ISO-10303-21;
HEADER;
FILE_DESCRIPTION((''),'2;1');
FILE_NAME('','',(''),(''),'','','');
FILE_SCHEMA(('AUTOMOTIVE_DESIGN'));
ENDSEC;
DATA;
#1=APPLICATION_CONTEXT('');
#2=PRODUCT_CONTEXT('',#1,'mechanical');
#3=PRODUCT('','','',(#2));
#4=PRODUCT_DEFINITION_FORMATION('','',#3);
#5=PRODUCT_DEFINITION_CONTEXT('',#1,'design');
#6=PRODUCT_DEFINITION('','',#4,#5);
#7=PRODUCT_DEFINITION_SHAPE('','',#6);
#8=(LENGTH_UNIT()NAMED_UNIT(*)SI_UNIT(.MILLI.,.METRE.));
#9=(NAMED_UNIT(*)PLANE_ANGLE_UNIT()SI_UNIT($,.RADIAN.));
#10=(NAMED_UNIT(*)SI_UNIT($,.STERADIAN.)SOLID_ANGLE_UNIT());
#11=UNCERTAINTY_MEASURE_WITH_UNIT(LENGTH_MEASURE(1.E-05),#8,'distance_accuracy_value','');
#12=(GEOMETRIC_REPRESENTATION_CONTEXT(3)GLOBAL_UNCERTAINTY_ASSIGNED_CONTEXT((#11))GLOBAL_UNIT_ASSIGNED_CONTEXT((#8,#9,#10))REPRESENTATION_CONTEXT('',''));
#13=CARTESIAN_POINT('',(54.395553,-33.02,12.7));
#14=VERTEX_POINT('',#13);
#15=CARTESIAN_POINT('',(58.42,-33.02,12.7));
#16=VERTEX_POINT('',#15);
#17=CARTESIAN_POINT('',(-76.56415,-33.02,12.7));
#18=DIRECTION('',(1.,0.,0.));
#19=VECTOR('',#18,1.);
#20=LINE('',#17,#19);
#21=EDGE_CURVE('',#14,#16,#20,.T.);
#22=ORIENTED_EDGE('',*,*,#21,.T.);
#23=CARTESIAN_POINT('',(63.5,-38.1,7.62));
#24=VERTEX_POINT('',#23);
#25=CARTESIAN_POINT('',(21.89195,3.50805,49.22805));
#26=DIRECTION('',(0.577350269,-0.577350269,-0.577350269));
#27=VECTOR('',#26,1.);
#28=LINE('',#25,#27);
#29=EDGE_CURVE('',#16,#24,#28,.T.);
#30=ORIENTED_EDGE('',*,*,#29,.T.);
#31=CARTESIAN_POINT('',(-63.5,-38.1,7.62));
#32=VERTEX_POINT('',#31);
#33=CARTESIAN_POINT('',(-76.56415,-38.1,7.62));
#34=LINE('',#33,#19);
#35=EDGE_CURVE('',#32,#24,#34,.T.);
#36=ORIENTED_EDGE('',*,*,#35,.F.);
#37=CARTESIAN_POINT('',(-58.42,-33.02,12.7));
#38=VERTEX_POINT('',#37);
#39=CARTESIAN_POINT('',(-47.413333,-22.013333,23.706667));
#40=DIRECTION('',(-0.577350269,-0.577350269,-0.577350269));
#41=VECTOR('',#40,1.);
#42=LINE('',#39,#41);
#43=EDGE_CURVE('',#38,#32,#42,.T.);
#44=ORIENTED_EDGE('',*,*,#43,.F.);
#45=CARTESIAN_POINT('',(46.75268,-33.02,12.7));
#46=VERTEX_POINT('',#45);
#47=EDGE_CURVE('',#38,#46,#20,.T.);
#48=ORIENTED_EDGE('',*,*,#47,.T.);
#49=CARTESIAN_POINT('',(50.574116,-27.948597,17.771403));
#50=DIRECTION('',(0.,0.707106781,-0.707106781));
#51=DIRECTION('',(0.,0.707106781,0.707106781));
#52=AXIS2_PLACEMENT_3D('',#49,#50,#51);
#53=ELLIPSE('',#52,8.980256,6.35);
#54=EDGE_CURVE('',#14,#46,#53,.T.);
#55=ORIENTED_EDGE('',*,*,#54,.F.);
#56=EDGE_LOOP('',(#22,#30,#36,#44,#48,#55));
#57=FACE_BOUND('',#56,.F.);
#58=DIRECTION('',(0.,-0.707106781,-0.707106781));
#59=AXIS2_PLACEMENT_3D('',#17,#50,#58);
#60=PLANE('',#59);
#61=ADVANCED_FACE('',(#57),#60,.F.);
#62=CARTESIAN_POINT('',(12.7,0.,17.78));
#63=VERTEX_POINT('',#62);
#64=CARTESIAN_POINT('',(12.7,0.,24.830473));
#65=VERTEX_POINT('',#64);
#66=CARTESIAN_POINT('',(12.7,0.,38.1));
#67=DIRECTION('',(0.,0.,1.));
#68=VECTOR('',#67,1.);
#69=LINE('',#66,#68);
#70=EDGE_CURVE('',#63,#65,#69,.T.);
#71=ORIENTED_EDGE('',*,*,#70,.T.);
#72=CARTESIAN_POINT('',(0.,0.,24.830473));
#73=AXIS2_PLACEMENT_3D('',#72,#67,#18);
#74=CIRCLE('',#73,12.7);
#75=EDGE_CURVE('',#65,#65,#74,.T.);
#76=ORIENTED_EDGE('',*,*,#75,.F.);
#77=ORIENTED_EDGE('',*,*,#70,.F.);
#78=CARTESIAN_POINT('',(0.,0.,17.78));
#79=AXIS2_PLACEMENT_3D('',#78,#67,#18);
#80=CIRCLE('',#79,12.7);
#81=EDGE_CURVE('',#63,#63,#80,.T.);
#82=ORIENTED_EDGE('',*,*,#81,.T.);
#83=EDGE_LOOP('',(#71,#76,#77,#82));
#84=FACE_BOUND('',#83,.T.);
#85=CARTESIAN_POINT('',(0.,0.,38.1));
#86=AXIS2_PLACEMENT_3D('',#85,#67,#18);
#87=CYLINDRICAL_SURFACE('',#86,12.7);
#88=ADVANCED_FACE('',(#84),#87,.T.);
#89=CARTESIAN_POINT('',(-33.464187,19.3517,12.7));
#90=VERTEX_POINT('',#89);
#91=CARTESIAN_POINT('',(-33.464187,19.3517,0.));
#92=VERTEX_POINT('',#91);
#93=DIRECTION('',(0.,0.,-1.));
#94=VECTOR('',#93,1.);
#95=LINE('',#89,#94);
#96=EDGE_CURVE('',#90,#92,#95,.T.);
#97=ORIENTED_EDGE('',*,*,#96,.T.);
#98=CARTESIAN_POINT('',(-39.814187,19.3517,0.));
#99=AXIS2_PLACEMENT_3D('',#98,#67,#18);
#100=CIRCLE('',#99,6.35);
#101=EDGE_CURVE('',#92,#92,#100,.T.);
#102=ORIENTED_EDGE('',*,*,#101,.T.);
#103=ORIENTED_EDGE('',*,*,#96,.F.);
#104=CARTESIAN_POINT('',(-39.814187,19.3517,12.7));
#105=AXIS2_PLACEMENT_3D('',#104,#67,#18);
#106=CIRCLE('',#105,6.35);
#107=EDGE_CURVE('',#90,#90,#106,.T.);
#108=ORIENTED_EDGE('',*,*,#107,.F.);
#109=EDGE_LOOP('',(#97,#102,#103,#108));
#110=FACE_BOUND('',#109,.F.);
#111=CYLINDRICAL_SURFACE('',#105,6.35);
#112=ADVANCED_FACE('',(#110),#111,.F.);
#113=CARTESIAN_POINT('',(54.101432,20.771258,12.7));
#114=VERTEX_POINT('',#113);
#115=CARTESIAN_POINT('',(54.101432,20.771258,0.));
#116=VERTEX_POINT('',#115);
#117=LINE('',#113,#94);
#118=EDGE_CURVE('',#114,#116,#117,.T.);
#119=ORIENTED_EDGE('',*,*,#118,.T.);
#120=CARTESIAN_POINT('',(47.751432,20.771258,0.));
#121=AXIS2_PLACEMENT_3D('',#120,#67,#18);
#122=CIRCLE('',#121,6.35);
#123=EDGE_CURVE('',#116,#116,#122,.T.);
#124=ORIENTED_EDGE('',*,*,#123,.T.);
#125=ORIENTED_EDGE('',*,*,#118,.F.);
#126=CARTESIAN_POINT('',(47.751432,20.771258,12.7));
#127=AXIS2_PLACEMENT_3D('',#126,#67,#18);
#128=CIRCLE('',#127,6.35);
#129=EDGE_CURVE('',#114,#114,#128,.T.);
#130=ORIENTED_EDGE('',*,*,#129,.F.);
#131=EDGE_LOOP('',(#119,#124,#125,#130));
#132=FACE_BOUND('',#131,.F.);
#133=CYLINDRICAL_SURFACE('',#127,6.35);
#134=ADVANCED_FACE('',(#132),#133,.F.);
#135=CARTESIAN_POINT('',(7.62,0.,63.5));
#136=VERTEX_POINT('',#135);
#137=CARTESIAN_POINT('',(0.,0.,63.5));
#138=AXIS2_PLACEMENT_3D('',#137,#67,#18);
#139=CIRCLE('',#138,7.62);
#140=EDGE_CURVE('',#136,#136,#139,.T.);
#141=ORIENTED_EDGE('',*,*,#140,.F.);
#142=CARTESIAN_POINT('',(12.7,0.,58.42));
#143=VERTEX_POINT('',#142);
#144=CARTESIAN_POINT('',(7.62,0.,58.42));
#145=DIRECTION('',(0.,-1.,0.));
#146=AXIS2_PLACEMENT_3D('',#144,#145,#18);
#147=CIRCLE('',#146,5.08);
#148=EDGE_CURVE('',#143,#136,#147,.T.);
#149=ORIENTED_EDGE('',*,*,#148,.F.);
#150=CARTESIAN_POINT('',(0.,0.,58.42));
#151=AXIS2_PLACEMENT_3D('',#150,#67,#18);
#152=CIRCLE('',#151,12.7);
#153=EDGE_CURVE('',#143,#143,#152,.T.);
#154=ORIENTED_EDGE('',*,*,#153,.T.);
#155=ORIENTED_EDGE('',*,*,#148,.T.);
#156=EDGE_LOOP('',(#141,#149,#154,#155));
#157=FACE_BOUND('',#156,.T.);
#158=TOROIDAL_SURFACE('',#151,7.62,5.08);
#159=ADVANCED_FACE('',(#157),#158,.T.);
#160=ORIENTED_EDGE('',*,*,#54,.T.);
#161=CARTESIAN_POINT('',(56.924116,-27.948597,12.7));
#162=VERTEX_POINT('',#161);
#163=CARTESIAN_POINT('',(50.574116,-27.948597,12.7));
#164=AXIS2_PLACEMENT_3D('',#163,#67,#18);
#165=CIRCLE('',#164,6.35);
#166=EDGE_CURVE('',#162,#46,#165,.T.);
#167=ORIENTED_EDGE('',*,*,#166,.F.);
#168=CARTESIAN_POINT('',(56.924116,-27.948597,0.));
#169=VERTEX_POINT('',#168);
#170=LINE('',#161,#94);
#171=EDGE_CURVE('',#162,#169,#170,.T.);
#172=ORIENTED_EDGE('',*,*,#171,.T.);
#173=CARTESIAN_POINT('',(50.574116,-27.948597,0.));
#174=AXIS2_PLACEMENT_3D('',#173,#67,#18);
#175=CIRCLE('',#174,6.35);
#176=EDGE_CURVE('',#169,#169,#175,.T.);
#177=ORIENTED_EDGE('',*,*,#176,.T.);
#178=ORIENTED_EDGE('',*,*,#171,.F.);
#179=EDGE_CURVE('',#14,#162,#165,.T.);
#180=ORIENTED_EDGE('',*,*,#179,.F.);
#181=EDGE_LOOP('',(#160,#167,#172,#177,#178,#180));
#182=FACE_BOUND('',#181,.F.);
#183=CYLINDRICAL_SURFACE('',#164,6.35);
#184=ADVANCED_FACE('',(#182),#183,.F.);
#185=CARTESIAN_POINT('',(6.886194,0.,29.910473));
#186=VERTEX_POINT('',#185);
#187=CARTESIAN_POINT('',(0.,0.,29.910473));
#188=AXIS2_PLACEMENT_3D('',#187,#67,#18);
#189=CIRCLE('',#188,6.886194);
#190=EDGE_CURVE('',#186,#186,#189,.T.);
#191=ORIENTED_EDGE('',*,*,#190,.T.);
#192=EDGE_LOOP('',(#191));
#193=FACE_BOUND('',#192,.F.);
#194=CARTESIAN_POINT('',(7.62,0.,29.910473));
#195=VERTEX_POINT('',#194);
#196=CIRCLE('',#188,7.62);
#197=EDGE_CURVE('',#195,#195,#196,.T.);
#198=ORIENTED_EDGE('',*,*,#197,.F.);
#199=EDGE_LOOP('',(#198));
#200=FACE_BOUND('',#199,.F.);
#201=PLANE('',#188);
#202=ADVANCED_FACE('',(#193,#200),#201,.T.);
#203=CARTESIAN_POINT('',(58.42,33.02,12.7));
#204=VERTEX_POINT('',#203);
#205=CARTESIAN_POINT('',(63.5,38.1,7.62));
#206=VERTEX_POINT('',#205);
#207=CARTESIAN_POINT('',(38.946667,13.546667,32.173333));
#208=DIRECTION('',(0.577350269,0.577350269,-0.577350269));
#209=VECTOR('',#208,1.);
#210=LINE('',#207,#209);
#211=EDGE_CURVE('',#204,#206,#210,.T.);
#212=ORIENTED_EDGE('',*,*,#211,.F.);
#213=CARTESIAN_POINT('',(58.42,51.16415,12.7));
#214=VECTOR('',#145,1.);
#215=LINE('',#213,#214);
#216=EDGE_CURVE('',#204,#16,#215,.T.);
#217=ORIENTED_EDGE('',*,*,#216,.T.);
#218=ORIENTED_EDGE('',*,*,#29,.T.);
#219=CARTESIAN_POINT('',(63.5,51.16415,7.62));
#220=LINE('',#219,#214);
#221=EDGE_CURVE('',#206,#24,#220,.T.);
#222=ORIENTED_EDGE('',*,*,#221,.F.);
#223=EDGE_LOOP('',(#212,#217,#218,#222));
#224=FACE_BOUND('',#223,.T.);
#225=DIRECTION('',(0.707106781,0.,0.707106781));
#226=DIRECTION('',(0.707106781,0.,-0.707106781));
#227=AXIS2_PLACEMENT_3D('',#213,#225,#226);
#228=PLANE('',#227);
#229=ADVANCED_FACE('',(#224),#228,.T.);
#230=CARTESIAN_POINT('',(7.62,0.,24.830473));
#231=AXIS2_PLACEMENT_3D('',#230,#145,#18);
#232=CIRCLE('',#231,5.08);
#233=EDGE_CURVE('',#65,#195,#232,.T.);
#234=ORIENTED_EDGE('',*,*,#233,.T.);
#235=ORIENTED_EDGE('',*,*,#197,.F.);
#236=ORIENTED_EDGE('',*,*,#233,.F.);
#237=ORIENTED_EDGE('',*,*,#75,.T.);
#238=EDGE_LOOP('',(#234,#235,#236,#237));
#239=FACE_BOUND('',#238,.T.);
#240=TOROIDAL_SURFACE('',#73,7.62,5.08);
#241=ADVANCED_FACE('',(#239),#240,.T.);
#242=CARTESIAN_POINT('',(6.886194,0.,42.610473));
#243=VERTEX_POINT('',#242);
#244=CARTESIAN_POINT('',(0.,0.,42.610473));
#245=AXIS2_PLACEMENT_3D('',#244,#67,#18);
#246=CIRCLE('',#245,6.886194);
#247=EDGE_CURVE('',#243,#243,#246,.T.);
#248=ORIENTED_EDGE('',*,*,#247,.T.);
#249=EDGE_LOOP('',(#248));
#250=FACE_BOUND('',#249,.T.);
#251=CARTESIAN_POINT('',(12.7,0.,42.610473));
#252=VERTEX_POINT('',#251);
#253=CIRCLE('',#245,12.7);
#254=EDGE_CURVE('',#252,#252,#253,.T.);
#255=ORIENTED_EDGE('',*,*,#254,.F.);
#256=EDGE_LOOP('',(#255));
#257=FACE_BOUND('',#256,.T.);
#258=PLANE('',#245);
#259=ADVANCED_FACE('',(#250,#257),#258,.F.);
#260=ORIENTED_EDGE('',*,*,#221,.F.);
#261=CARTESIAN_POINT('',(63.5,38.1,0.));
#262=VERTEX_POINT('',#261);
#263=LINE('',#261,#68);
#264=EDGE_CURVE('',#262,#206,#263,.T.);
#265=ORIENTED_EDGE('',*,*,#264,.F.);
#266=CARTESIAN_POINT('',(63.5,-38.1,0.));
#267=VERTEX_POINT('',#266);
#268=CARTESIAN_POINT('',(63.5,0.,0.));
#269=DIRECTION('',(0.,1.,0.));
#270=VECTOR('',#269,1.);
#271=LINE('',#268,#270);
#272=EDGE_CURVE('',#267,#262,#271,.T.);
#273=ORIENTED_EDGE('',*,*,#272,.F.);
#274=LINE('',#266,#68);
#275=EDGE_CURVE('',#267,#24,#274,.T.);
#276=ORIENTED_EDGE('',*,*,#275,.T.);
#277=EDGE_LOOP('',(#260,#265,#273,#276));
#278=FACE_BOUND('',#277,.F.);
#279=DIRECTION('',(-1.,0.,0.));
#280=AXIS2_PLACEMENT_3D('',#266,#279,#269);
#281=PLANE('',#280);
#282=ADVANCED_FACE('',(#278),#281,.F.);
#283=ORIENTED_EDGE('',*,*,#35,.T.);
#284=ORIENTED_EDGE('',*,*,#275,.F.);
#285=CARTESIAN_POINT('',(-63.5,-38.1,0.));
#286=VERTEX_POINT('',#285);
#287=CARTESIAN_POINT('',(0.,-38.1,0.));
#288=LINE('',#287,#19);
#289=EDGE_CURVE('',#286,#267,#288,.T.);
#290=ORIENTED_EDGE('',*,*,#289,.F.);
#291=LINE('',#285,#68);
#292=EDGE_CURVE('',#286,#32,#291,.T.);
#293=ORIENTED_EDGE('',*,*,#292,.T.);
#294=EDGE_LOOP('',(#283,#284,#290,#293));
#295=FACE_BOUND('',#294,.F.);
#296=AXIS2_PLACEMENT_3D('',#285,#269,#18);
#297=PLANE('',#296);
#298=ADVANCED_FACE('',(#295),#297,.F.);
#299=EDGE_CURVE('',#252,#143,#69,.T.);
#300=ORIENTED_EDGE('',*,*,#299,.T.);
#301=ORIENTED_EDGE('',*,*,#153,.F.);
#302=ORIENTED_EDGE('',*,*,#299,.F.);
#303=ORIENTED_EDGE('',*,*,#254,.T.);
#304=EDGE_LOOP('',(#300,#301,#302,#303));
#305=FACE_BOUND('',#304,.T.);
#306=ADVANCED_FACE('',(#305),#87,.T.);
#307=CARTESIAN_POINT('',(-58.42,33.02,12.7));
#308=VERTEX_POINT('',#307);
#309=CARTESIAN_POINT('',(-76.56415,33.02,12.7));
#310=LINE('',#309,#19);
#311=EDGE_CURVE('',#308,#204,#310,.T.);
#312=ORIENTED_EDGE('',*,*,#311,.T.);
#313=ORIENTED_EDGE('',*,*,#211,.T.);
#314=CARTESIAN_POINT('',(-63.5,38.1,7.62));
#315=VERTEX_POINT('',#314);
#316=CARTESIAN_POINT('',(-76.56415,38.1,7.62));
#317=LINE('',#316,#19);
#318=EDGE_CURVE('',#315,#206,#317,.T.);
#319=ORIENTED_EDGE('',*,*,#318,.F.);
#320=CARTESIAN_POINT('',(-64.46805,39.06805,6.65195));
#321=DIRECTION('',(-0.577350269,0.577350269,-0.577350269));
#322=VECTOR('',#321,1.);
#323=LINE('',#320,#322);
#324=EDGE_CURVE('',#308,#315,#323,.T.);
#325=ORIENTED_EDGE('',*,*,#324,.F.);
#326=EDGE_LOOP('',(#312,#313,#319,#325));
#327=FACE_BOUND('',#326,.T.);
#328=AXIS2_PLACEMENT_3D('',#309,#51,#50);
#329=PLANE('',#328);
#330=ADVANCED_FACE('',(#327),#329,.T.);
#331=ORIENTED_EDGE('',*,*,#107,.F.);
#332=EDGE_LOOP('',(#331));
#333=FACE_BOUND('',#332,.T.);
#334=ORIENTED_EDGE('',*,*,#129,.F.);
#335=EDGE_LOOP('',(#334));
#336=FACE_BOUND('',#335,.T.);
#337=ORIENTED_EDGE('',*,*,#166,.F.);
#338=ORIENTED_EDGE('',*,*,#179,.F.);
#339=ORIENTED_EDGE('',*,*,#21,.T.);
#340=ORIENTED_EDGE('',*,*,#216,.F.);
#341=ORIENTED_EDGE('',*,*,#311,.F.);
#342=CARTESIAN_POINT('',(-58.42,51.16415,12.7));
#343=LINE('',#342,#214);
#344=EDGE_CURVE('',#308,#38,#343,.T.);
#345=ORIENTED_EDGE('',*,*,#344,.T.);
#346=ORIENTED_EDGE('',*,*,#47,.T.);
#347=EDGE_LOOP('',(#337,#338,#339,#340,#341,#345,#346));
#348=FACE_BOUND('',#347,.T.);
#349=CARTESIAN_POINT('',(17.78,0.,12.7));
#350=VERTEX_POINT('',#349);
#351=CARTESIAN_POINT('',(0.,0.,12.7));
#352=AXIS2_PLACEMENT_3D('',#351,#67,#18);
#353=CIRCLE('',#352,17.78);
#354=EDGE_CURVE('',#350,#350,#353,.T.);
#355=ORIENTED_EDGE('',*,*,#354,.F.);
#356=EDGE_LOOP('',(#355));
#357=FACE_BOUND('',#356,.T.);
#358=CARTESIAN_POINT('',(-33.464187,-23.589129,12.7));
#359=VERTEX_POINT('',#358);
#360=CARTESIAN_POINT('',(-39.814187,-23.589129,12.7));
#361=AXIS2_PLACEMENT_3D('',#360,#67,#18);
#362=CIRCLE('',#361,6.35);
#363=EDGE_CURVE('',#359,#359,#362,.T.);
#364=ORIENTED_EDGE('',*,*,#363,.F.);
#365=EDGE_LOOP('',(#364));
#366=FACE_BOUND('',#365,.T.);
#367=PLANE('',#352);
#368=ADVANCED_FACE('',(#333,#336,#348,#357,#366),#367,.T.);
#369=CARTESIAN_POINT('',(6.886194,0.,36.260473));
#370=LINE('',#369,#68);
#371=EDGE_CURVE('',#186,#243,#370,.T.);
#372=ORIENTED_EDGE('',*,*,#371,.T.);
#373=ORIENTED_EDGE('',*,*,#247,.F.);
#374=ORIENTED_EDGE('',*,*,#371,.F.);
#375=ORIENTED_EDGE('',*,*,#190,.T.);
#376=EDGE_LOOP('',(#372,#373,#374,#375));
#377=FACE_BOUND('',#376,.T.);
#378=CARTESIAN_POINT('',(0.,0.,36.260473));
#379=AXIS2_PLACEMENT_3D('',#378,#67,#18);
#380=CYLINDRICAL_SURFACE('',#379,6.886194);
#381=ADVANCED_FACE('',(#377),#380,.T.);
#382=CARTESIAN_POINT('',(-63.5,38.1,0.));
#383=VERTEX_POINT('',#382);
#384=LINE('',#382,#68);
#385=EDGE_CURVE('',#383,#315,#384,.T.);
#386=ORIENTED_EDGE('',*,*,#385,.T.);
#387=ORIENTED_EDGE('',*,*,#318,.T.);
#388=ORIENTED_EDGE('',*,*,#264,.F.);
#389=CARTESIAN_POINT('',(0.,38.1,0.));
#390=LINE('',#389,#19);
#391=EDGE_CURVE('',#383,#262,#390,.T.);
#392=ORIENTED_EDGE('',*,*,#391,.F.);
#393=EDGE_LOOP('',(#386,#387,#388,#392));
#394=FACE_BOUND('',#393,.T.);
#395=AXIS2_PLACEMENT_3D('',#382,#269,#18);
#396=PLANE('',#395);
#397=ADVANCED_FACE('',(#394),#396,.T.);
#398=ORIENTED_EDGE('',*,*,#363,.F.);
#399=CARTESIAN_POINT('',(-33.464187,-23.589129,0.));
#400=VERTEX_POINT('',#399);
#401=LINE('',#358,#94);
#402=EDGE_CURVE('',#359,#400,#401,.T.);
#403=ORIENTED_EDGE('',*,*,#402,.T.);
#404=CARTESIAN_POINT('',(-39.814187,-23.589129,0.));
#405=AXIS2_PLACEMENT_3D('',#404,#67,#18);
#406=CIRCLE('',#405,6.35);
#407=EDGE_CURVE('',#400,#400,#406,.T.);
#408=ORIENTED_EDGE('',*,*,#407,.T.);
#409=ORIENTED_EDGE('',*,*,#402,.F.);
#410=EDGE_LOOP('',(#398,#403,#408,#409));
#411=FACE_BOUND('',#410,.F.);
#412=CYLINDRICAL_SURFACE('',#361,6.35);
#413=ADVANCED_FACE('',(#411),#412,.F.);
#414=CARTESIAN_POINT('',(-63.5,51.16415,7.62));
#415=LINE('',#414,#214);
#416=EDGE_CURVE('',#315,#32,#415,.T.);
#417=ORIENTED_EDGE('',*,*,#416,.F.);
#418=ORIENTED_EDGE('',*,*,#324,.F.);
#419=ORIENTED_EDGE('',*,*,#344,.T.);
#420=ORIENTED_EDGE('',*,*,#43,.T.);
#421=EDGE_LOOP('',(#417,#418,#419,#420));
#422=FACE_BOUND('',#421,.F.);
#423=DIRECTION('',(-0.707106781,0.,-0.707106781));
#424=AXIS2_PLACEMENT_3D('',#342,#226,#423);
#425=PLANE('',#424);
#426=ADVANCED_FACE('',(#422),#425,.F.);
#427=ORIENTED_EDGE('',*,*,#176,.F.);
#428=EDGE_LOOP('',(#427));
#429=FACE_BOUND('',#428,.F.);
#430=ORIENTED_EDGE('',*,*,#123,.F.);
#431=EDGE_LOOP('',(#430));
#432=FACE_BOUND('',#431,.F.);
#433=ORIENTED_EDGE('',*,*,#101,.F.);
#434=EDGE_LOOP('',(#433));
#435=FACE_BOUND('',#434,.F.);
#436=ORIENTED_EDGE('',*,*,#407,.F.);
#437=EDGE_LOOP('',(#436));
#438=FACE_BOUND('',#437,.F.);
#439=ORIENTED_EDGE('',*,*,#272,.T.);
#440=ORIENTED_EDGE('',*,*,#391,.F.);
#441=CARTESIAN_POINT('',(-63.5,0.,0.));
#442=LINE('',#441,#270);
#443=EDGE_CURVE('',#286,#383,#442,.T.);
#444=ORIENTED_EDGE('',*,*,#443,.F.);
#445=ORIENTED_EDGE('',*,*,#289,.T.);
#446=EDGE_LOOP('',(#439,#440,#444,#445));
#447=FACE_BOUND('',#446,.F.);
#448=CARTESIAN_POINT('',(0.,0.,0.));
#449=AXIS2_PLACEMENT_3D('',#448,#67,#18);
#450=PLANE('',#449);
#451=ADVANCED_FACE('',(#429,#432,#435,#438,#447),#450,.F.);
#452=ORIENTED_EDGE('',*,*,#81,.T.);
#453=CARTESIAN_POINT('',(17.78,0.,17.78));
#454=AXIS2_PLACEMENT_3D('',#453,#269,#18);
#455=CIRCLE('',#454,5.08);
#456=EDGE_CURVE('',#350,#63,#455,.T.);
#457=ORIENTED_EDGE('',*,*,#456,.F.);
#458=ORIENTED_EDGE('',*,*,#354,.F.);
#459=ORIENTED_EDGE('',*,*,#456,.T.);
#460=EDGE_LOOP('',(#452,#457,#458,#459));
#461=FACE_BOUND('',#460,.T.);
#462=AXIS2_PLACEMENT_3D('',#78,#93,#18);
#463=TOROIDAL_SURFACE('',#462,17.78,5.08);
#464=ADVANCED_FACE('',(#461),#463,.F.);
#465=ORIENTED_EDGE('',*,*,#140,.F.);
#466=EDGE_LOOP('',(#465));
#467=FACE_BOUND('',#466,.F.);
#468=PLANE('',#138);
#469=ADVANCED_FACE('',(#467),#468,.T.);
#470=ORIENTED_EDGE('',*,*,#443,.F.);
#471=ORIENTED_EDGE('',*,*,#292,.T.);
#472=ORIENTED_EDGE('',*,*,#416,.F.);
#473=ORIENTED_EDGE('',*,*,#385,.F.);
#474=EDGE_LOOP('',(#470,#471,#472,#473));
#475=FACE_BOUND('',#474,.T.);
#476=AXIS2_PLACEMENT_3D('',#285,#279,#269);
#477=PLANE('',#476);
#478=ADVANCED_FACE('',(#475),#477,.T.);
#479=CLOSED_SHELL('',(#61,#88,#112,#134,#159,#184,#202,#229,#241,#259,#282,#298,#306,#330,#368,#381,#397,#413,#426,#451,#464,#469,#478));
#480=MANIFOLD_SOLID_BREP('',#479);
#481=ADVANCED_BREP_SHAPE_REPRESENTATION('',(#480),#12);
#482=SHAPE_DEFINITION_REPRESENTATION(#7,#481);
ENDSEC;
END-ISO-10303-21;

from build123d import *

# Parameters (mm, degrees)
F0_W        = 127
F0_H        = 76.2
F1_DEPTH    = 12.7
F2_R        = 6.35
F3_DEPTH    = 12.701
F4_W        = 12.7
F4_H        = 50.8
F6_W        = 7.62
F6_H        = 12.7
F8_R        = 5.08
F9_T1_DEPTH = 153.1282991577
F9_T3_DEPTH = 102.3282991577


# Not quite as in the source:
# - a fillet or chamfer that OpenCascade refuses, or shapes differently, is made with other operations: its cross-section is extruded or revolved along the edge and cut away or added


with BuildPart() as f1:
    # F0 (on Top) → F1 (new body)
    with BuildSketch(Plane.XY):
        Rectangle(F0_W, F0_H)
    extrude(amount=F1_DEPTH)

    # F2 (on face) → F3 (cut, through all)
    with BuildSketch(Plane.XY.offset(12.7)):
        with Locations((-39.8141870437, -23.5891287784)):
            Circle(F2_R)
        with Locations((47.751432499, 20.7712577737)):
            Circle(F2_R)
        with Locations((-39.8141870437, 19.3517001108)):
            Circle(F2_R)
        with Locations((50.5741164088, -27.9485974461)):
            Circle(F2_R)
    extrude(amount=-F3_DEPTH, mode=Mode.SUBTRACT)

    # F4 (on Front) → F5 (revolve)
    with BuildSketch(Plane.XZ):
        with Locations((6.35, 38.1)):
            Rectangle(F4_W, F4_H)
    revolve(axis=Axis((0, 0, 38.1), (0, 0, 1)))

    # F6 (on Front) → F7 (revolve, cut)
    with BuildSketch(Plane.XZ):
        with Locations((10.6961938009, 36.2604726106)):
            Rectangle(F6_W, F6_H)
    revolve(axis=Axis((0, 0, 12.7), (0, 0, 1)), mode=Mode.SUBTRACT)

    # F8
    f8_edges = [f1.edges().sort_by_distance(p)[0] for p in [
        (-12.7, 0, 29.910473),
        (-12.7, 0, 63.5),
        (-12.7, 0, 12.7),
    ]]
    fillet(f8_edges, radius=F8_R)

    # F9: chamfer of 5.08 on 7 edges, made by hand

    # F9_s2 → F9_t1 (cut)
    with BuildSketch(Plane.YZ.offset(-76.5641495789)):
        Polygon((33.02, 12.7), (38.1, 7.62), (38.1, 12.7), align=None)
        Polygon((-33.02, 12.7), (-38.1, 7.62), (-38.1, 12.7), align=None)
    extrude(amount=F9_T1_DEPTH, mode=Mode.SUBTRACT)

    # F9_s4 → F9_t3 (cut)
    with BuildSketch(Plane.XZ.offset(-51.1641495789)):
        Polygon((58.42, 12.7), (63.5, 7.62), (63.5, 12.7), align=None)
        Polygon((-58.42, 12.7), (-63.5, 7.62), (-63.5, 12.7), align=None)
    extrude(amount=F9_T3_DEPTH, mode=Mode.SUBTRACT)


solid = f1.part
